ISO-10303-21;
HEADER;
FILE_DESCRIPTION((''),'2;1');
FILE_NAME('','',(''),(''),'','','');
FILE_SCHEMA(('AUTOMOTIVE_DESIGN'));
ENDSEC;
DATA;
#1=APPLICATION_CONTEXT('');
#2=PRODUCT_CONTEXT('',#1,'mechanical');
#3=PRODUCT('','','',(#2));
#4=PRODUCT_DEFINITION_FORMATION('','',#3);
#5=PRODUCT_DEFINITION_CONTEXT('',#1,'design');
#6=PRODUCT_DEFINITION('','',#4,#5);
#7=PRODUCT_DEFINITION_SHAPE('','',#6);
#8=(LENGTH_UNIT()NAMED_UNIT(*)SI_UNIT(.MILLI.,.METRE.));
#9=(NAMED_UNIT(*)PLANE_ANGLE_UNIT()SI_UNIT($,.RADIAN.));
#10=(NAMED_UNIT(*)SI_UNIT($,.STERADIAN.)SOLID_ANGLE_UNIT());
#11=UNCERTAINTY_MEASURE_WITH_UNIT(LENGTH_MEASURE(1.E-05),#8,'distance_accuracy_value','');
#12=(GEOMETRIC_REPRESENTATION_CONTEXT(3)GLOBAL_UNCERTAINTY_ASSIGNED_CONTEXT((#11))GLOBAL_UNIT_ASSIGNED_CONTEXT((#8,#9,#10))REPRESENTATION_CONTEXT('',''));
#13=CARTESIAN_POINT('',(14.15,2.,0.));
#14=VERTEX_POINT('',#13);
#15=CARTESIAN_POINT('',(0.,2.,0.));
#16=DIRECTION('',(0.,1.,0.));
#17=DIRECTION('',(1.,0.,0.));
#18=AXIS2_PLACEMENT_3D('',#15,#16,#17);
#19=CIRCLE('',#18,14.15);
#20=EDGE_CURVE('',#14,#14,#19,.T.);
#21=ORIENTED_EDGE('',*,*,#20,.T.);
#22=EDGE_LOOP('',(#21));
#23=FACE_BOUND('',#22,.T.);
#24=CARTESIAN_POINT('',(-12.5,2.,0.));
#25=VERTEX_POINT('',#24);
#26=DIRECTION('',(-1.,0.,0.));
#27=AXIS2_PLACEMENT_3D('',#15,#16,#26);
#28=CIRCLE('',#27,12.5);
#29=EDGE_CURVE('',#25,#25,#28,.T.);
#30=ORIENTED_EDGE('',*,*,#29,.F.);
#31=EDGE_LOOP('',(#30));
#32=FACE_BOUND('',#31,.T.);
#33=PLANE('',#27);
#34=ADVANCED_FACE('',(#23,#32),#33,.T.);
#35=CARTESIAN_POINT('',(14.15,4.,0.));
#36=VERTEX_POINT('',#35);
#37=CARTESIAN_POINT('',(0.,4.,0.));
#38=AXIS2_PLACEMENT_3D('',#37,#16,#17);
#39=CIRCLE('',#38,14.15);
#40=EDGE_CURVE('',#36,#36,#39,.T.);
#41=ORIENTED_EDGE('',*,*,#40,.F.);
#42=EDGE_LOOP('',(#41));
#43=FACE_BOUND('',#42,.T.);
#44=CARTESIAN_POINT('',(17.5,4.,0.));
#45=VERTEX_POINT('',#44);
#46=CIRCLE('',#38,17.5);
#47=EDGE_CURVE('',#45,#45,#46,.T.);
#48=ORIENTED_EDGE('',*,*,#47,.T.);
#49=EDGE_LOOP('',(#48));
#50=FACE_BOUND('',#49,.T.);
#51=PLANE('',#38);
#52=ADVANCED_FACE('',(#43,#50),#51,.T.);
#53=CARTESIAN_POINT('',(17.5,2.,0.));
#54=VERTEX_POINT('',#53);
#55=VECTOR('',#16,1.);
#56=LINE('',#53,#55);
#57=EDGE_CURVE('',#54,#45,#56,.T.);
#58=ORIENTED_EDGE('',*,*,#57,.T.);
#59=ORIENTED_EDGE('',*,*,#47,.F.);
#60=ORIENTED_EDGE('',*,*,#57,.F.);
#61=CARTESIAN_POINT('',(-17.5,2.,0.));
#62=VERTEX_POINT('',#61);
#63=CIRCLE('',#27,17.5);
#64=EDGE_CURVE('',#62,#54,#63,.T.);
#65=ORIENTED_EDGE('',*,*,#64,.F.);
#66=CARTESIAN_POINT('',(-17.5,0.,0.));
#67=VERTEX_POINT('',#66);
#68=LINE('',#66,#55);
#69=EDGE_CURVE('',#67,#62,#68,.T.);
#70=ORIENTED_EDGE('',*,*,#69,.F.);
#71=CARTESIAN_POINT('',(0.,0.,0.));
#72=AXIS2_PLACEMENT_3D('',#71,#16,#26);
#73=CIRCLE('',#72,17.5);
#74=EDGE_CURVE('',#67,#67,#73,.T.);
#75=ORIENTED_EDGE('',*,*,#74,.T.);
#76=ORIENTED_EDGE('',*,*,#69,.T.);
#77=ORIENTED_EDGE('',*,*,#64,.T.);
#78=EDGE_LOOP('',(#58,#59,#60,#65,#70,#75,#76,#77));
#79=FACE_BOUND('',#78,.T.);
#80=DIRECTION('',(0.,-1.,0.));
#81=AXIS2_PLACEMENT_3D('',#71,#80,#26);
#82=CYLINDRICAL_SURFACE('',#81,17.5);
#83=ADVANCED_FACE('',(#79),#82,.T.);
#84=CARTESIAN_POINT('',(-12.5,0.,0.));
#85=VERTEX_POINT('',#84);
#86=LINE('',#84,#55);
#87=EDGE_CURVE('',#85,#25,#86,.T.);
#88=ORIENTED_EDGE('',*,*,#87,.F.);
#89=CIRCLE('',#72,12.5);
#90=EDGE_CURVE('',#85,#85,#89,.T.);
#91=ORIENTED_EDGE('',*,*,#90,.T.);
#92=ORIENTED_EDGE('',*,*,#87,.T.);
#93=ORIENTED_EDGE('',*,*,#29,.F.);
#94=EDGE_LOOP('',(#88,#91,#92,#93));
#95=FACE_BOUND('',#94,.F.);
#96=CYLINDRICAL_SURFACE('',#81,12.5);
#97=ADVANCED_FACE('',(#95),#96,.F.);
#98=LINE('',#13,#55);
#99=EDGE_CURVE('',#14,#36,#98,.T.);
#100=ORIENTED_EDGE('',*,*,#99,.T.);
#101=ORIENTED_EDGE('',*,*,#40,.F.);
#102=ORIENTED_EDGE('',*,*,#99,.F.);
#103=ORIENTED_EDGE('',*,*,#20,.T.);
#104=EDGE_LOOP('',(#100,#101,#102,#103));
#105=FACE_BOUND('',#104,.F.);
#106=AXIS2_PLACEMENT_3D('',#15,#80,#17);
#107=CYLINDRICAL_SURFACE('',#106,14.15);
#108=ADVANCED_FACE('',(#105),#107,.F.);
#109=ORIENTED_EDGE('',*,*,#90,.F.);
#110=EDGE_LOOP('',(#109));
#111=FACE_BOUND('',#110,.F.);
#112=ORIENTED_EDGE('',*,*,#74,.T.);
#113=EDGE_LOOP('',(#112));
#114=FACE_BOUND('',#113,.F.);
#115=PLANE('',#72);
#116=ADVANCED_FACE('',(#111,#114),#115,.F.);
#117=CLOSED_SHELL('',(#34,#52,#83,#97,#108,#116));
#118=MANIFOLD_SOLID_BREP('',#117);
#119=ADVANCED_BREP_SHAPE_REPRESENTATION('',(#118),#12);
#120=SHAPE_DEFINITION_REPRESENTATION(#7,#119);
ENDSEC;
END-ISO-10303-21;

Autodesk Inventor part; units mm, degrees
ref_plane "YZ Plane" through (0, 0, 0) normal (1, 0, 0) x (0, 1, 0)
ref_plane "XZ Plane" through (0, 0, 0) normal (0, 1, 0) x (-1, 0, 0)
ref_plane "XY Plane" through (0, 0, 0) normal (0, 0, 1) x (1, 0, 0)
sketch "Sketch1" plane through (0, 0, 0) normal (0, 1, 0) x (-1, 0, 0)
  circle A0 centre (0, 0) radius 17.5
  circle A1 centre (0, 0) radius 12.5
  dimension "d0" = 35
  dimension "d1" = 25
extrude "Extrusion1" add sketch "Sketch1" along normal blind 2
sketch "Sketch2" plane through (0, 2, 0) normal (0, 1, 0) x (1, 0, 0)
  circle A0 centre (0, 0) radius 17.5
  circle A1 centre (0, 0) radius 14.15
  dimension "d4" = 35
  dimension "d5" = 28.3
extrude "Extrusion2" add sketch "Sketch2" along normal blind 2
properties part number "Bearing-Testbench"
